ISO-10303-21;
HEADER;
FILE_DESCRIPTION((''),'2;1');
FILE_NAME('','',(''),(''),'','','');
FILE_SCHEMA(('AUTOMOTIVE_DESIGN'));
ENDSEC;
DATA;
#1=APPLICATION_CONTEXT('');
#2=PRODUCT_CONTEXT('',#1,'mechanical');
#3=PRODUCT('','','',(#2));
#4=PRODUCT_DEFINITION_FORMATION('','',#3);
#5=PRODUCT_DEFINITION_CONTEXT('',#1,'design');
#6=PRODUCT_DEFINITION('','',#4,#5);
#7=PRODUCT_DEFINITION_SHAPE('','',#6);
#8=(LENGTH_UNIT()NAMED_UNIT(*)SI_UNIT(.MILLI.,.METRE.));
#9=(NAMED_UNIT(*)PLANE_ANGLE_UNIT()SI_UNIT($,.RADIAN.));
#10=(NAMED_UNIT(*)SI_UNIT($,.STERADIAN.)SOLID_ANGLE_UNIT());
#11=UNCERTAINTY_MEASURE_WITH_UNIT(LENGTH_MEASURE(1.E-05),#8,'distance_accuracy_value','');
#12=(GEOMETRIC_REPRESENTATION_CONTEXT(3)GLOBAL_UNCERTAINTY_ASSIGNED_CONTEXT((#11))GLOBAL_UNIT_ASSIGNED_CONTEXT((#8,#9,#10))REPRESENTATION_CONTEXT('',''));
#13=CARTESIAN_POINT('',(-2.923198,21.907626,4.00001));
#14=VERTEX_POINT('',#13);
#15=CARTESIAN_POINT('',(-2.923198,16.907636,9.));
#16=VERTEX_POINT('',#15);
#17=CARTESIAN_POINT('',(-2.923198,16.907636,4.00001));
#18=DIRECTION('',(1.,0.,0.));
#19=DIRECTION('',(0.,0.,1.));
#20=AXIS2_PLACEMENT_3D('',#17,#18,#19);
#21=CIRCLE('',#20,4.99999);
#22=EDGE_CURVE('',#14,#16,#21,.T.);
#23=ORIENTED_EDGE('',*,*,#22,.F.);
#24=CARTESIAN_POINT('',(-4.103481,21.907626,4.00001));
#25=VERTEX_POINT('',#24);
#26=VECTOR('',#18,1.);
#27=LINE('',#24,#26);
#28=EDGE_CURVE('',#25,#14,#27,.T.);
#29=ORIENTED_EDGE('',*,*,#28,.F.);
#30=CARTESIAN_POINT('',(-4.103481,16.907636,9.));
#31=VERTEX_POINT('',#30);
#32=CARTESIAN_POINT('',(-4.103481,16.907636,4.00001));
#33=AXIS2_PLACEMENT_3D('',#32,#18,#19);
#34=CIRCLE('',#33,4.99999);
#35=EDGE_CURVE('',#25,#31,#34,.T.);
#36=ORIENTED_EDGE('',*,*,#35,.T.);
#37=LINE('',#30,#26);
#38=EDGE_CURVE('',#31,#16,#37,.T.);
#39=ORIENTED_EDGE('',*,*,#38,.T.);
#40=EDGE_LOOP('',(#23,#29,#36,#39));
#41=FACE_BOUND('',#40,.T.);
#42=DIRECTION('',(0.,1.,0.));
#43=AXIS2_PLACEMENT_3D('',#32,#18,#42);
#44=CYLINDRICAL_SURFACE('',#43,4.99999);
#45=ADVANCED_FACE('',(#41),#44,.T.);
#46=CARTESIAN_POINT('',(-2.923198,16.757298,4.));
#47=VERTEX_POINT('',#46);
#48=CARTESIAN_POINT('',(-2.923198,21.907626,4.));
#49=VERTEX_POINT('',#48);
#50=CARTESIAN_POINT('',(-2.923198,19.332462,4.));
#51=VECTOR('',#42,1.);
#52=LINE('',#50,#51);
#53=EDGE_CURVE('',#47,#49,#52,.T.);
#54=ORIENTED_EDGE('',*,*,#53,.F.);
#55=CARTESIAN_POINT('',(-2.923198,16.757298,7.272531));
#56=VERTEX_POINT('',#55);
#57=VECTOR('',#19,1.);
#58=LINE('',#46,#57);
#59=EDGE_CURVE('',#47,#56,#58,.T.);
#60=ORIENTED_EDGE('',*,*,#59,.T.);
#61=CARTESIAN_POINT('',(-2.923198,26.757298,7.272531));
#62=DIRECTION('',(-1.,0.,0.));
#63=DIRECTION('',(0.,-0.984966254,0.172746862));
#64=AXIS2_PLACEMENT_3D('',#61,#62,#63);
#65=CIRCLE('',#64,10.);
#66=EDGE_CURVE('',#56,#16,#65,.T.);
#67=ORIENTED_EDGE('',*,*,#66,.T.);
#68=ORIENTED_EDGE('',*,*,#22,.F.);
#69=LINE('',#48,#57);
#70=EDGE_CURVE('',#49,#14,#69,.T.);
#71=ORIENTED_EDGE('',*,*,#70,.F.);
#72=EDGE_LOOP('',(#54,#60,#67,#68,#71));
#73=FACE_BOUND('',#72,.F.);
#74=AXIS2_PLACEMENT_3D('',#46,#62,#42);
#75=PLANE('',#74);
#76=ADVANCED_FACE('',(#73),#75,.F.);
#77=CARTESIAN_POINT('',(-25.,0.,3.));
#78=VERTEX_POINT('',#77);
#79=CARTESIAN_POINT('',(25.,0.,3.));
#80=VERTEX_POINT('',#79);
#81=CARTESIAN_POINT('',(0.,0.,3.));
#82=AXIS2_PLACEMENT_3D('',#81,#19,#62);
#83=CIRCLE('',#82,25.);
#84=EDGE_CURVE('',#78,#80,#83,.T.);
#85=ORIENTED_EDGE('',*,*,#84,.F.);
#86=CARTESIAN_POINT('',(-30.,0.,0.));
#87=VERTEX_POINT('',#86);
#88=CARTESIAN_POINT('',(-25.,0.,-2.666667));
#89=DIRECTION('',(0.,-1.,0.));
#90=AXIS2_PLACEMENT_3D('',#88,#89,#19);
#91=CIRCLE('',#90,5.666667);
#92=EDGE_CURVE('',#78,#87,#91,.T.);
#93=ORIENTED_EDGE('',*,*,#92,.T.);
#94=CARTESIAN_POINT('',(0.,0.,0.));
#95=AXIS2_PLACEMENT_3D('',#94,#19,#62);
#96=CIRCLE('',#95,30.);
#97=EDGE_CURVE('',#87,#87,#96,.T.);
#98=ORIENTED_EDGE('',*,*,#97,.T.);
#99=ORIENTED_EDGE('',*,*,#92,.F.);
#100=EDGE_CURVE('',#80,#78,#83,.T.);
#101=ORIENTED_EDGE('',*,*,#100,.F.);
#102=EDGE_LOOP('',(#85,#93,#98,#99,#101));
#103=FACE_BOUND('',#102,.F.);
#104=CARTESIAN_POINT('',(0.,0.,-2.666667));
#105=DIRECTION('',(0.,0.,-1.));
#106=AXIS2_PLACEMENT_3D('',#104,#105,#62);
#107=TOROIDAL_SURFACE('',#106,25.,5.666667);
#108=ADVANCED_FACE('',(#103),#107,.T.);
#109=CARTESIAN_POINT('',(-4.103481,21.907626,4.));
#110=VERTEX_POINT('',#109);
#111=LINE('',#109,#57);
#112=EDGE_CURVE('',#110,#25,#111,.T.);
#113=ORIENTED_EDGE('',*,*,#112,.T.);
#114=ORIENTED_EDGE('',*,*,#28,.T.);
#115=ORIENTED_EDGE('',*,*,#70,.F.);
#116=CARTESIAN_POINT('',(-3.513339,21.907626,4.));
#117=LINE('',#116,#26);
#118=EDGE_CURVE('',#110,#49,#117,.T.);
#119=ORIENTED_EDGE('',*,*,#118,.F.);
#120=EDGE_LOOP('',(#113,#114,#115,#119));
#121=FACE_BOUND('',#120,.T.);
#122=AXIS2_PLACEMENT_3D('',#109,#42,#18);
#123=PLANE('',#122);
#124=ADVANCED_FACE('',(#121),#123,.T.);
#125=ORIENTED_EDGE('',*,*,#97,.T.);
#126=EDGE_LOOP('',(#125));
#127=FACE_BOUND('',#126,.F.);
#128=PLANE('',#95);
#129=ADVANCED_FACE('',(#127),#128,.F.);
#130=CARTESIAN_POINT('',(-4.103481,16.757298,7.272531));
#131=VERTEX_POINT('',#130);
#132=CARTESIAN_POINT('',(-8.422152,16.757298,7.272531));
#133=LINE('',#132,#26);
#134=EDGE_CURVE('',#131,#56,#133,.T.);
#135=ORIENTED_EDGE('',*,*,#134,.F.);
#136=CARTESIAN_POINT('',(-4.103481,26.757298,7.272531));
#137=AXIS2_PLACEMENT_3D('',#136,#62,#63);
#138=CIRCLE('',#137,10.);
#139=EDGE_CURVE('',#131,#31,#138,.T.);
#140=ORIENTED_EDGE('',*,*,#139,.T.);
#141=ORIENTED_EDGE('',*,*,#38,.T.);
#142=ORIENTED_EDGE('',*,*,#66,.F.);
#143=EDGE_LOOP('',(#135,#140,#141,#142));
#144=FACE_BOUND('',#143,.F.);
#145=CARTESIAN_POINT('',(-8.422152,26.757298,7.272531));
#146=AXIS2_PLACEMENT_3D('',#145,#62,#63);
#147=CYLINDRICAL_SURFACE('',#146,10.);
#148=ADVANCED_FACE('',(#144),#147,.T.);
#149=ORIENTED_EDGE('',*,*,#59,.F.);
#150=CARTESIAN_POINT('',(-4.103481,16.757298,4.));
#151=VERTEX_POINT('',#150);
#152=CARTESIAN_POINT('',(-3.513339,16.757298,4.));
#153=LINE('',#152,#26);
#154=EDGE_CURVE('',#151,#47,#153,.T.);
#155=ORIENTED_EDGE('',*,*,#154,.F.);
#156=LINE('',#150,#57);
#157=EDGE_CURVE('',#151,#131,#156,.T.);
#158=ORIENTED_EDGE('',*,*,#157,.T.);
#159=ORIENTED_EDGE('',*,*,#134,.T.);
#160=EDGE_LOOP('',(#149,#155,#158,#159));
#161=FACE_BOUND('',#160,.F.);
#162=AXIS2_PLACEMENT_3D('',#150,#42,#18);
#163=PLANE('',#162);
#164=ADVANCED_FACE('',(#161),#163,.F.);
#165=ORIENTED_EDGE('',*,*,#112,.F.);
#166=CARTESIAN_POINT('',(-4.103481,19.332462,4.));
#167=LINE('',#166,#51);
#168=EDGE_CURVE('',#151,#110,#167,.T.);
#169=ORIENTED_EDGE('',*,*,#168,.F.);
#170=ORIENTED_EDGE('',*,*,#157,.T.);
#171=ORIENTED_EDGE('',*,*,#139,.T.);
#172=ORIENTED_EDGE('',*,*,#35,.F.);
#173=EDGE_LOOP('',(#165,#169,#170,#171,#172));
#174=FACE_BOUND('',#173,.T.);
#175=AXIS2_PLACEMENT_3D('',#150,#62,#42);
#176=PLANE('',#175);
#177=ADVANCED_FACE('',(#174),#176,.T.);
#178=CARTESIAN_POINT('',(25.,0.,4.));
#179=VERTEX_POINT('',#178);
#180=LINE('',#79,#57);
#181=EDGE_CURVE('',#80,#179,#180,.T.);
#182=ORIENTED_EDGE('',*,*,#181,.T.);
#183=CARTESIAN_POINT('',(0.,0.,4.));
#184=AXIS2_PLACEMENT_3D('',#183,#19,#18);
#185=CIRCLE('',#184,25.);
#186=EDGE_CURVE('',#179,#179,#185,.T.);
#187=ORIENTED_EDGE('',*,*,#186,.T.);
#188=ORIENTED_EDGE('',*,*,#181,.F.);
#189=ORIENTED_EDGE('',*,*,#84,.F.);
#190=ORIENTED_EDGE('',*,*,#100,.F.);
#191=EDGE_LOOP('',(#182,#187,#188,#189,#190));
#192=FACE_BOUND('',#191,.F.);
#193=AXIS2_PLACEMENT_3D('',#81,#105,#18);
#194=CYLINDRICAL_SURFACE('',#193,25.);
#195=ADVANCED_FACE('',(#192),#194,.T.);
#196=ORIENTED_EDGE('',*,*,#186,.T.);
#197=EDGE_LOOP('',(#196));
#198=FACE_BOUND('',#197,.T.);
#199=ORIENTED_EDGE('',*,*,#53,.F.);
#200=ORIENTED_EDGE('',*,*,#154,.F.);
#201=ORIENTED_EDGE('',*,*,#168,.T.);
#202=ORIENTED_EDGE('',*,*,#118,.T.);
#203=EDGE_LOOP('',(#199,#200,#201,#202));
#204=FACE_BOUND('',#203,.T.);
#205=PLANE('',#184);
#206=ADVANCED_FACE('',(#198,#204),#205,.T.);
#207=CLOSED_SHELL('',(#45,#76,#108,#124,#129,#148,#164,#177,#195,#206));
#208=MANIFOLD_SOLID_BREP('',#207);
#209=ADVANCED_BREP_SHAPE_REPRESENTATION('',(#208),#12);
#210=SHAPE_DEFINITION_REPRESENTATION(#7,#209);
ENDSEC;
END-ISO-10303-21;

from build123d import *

# Parameters (mm, degrees)
F3_R        = 25
F4_DEPTH    = 1
F5_W        = 1.1802830268
F5_H        = 5.150327459
F6_DEPTH    = 5
F7_R        = 4.99999
F8_T1_DEPTH = 9.8176261194


# Not quite as in the source:
# - a fillet or chamfer that OpenCascade refuses, or shapes differently, is made with other operations: its cross-section is extruded or revolved along the edge and cut away or added
# - a fillet or chamfer is up to 0.001 mm smaller than in the source, because OpenCascade refuses the exact size


with BuildPart() as f1:
    # F0 (on Front) → F1 (revolve)
    with BuildSketch(Plane.XZ):
        with BuildLine():
            Line((-30, 0), (0, 0))
            Line((0, 0), (0, 3))
            Line((0, 3), (-25, 3))
            ThreePointArc((-25, 3), (-27.9154759474, 2.1924599124), (-30, 0))
        make_face()
    revolve(axis=Axis((0, 0, 1.5), (0, 0, 1)))

    # F3 (on face) → F4 (join)
    with BuildSketch(Plane.XY.offset(3)):
        Circle(F3_R)
    extrude(amount=F4_DEPTH)

    # F5 (on face) → F6 (join)
    with BuildSketch(Plane.XY.offset(4)):
        with Locations((-3.5133393249, 19.3324619904)):
            Rectangle(F5_W, F5_H)
    extrude(amount=F6_DEPTH)

    # F7 (radius 5 in the source; OpenCascade refuses exactly that, so slightly less here)
    f7_edges = [f1.edges().sort_by_distance(p)[0] for p in [
        (-3.513339, 21.907626, 9),
    ]]
    fillet(f7_edges, radius=F7_R)

    # F8: fillet of radius 10 on 1 edges, made by hand

    # F8_s2 → F8_t1 (cut)
    with BuildSketch(Plane.YZ.offset(-8.4221523845)):
        with BuildLine():
            ThreePointArc((16.9076357199, 9), (16.7949535216, 8.1395303981), (16.7572982609, 7.2725313815))
            Line((16.7572982609, 7.2725313815), (16.7572982609, 9))
            Line((16.7572982609, 9), (16.9076357199, 9))
        make_face()
    extrude(amount=F8_T1_DEPTH, mode=Mode.SUBTRACT)


solid = f1.part
